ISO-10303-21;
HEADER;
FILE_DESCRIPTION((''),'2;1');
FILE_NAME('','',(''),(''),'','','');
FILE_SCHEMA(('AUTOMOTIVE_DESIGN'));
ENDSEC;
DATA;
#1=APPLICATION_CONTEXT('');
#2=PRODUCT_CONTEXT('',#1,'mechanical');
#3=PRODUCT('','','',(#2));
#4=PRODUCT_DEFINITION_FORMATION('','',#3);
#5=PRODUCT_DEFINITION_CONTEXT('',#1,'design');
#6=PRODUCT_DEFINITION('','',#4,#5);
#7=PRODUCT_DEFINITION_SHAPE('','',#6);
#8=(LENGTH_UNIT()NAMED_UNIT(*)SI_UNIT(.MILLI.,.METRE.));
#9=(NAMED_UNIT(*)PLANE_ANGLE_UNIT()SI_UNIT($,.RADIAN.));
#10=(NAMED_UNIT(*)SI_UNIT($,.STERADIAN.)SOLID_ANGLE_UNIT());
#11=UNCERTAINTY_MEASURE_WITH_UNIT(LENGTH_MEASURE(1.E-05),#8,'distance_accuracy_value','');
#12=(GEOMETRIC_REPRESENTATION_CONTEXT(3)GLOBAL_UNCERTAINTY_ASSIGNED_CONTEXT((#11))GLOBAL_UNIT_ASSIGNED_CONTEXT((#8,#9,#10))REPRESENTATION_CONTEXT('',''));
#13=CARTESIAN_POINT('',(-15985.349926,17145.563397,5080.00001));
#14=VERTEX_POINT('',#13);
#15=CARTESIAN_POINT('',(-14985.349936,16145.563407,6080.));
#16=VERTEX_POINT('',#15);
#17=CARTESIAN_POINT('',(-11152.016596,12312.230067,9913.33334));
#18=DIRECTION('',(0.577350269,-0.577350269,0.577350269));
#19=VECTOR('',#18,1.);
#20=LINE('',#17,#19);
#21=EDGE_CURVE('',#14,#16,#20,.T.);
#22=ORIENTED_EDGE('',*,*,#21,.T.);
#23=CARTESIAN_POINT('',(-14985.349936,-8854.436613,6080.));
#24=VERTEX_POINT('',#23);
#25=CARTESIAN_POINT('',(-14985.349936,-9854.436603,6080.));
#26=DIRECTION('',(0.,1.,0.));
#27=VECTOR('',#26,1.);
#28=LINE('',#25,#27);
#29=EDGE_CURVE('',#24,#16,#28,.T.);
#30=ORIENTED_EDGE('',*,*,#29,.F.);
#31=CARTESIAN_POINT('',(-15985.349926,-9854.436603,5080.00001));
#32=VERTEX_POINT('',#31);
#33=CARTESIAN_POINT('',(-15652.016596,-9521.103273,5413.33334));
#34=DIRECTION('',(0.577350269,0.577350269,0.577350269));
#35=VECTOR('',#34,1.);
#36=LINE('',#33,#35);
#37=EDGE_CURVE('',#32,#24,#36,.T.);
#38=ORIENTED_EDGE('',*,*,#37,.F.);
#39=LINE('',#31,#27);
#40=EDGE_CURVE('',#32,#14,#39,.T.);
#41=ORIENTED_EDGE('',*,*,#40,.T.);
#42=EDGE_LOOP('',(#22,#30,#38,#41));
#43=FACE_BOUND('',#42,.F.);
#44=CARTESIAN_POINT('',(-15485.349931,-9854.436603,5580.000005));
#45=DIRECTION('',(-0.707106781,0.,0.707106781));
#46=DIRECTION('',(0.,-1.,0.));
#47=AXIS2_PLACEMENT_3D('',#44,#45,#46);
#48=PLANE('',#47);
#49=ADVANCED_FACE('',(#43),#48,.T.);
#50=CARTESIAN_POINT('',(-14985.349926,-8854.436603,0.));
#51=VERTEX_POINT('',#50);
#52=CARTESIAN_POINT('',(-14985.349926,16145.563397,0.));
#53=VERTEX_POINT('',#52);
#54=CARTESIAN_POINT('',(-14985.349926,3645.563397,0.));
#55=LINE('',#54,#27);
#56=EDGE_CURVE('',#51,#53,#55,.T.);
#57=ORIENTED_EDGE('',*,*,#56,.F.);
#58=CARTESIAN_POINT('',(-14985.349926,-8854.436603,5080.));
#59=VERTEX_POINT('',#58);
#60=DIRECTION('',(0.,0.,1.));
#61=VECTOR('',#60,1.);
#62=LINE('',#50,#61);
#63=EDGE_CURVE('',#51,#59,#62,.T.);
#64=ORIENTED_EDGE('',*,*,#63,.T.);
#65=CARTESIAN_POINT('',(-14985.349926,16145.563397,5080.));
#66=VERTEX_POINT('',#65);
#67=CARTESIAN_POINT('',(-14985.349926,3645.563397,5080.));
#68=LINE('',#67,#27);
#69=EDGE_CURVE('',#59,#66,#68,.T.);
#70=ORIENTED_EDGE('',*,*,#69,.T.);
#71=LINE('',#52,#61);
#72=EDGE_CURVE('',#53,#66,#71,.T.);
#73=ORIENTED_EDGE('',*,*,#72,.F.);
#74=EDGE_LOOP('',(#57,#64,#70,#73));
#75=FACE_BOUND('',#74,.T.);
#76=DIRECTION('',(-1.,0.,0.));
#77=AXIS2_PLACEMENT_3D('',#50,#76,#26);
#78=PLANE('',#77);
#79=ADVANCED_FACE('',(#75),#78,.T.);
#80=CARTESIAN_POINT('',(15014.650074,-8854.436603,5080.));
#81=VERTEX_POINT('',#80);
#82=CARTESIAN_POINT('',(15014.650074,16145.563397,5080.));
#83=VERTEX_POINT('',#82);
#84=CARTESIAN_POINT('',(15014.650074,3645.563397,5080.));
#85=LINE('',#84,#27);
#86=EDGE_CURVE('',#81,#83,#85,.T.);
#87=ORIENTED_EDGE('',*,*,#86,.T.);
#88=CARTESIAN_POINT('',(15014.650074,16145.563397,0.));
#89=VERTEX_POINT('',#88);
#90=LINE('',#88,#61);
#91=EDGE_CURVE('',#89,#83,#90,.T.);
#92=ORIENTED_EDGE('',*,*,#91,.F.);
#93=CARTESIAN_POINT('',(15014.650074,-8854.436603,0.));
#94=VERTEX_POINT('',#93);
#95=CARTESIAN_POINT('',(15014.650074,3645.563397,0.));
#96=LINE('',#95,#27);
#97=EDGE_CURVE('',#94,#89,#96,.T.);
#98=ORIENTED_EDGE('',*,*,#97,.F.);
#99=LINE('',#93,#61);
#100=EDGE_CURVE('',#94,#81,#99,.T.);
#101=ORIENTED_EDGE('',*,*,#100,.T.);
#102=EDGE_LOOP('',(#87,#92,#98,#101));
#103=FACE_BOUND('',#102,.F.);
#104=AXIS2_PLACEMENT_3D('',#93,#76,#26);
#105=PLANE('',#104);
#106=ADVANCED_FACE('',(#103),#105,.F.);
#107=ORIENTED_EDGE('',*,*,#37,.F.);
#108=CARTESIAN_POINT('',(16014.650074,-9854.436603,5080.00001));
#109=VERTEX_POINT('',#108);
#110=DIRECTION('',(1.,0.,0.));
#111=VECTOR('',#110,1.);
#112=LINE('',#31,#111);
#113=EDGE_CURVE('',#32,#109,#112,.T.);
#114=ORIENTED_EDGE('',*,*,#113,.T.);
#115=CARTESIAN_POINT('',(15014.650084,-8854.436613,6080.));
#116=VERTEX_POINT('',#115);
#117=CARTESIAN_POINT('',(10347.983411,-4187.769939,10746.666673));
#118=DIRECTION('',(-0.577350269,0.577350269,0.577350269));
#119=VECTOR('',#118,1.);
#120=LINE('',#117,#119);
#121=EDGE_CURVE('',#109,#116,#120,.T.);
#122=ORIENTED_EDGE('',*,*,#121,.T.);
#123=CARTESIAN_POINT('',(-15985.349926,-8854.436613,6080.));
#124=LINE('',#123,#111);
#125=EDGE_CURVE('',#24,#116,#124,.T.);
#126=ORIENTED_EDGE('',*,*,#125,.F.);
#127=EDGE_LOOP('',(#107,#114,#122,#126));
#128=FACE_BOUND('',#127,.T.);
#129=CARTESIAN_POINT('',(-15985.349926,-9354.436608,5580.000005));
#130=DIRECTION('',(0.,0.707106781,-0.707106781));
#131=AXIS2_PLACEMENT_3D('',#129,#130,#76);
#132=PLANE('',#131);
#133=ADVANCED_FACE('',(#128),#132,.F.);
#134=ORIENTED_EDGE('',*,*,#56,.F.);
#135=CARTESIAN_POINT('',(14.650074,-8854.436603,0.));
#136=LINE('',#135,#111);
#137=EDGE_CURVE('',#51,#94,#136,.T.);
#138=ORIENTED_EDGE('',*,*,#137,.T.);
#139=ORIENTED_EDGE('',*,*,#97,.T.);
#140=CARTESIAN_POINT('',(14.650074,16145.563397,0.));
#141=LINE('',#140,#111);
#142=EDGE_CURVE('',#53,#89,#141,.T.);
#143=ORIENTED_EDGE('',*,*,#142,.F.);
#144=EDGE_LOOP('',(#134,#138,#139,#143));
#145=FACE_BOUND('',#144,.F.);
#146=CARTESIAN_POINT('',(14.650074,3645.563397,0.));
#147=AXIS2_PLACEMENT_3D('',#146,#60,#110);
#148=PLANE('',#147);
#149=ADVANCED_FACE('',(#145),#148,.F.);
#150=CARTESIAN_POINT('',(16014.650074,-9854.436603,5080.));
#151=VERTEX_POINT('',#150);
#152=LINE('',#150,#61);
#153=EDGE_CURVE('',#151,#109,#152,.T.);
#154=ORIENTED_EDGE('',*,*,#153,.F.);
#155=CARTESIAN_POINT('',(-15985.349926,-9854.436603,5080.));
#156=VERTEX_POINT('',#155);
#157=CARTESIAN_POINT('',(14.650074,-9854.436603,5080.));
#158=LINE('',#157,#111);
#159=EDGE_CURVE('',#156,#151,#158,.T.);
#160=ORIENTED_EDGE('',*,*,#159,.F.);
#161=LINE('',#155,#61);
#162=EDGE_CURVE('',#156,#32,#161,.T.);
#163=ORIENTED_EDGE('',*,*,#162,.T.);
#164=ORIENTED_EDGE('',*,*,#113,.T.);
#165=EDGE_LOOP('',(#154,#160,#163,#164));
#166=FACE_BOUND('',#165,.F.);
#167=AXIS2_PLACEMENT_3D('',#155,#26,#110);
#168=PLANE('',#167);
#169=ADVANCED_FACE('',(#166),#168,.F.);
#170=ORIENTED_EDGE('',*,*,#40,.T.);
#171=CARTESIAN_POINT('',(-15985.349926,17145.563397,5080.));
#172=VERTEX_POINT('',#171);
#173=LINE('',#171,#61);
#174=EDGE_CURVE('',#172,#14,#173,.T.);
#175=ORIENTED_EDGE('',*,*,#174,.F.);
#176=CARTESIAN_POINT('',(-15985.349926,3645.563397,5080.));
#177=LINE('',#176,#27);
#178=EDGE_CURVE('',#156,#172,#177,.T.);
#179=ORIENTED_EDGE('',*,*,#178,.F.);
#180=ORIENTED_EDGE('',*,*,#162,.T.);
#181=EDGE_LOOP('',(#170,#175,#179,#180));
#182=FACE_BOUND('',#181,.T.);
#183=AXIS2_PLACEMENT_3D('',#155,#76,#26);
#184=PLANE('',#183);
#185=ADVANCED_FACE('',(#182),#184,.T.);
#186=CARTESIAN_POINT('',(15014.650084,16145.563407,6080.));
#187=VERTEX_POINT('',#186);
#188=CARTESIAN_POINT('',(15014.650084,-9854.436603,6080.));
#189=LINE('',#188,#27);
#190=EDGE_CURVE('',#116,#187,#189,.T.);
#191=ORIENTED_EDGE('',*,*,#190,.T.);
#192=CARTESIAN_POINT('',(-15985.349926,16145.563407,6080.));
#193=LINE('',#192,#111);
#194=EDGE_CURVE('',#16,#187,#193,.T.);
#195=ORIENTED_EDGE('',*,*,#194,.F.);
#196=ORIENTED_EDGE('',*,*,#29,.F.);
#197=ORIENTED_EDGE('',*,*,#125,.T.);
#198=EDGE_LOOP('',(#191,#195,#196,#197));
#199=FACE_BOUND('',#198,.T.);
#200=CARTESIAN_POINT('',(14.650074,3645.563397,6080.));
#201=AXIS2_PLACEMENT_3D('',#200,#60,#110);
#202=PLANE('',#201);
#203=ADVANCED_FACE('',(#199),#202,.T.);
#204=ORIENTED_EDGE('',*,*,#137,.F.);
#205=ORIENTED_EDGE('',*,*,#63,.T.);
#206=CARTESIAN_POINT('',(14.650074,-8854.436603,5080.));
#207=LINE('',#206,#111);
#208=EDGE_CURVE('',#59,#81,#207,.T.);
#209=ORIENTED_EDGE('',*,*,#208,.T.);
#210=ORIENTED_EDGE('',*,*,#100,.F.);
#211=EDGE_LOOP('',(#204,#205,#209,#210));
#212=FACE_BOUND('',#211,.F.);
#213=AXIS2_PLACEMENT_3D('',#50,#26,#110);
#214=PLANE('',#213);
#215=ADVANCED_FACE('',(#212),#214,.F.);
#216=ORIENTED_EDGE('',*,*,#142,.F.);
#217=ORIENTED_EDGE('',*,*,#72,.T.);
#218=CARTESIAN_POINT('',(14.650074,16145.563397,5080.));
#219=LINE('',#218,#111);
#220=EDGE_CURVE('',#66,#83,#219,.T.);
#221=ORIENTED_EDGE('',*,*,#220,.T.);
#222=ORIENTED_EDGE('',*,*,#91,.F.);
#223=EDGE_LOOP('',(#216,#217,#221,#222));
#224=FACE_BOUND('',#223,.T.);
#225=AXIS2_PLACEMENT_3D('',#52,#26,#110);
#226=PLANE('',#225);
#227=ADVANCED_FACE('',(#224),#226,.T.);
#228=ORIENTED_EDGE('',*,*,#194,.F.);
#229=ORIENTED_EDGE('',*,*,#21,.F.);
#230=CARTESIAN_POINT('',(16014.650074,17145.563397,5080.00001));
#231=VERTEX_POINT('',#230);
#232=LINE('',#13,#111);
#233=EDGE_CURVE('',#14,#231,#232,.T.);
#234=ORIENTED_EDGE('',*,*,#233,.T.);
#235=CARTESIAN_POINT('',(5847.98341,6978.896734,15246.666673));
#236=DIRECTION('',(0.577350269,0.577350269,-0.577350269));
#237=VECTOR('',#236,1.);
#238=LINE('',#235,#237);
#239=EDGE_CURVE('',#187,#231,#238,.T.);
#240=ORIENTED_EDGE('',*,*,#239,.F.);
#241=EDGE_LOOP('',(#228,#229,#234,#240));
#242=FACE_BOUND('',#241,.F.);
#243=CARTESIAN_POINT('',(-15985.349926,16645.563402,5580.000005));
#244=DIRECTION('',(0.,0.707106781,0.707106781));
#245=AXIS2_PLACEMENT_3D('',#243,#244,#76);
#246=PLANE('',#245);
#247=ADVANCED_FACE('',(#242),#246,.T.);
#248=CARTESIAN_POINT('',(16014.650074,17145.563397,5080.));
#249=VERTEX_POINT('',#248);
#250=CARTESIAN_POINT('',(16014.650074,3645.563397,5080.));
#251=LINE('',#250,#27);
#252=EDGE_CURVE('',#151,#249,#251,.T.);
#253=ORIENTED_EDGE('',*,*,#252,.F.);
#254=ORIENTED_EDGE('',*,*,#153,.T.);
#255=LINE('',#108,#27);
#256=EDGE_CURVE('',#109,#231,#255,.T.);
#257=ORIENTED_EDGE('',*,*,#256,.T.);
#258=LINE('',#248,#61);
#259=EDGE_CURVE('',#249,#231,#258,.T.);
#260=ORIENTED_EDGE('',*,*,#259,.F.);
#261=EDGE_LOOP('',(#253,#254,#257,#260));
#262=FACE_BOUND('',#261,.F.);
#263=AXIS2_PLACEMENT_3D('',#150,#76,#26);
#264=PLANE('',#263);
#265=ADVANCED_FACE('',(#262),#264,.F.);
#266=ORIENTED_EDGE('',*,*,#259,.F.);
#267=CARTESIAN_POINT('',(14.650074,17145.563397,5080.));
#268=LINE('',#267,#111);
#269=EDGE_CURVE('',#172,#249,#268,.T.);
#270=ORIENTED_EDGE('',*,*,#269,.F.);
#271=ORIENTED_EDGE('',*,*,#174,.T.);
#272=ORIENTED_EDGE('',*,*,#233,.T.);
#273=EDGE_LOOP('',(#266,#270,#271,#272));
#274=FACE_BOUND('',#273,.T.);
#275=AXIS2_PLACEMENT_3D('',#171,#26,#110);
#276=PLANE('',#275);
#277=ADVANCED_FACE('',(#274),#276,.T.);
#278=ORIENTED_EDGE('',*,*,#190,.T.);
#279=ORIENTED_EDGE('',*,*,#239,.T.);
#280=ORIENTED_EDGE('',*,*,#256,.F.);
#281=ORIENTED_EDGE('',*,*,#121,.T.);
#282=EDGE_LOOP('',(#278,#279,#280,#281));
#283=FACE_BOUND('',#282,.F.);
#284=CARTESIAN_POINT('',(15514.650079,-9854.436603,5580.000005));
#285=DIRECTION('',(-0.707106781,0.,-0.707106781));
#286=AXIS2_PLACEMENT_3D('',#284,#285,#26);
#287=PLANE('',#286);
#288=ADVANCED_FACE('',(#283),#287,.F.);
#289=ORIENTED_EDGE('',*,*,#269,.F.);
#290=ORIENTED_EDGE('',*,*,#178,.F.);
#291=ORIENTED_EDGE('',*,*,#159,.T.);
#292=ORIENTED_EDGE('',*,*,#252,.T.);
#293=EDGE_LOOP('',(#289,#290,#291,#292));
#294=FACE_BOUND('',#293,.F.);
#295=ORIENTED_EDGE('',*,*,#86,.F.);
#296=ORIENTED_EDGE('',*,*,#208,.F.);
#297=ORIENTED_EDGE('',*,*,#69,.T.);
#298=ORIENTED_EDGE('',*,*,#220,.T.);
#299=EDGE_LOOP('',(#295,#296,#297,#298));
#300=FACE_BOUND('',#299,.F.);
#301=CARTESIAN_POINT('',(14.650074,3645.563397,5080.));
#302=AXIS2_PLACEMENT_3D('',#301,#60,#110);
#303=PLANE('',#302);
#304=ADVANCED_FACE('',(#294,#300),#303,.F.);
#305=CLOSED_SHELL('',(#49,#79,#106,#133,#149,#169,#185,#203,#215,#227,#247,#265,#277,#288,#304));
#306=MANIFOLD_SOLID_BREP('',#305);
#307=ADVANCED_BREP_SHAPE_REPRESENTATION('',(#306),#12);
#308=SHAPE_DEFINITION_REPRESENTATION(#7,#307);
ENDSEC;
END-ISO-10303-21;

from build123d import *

# Parameters (mm, degrees)
F0_W     = 30000
F0_H     = 25000
F1_DEPTH = 5080
F2_W     = 32000
F2_H     = 27000
F3_DEPTH = 1000
F4_SIZE  = 999.99999


# Not quite as in the source:
# - a fillet or chamfer is up to 0.001 mm smaller than in the source, because OpenCascade refuses the exact size


with BuildPart() as f1:
    # F0 (on Top) → F1 (new body)
    with BuildSketch(Plane.XY):
        with Locations((14.6500738338, 3645.5633971739)):
            Rectangle(F0_W, F0_H)
    extrude(amount=F1_DEPTH)

    # F2 (on face) → F3 (join)
    with BuildSketch(Plane.XY.offset(5080)):
        with Locations((14.6500738338, 3645.5633971739)):
            Rectangle(F2_W, F2_H)
    extrude(amount=F3_DEPTH)

    # F4 (size 1000 in the source; OpenCascade refuses exactly that, so slightly less here)
    f4_edges = [f1.edges().sort_by_distance(p)[0] for p in [
        (14.650074, -9854.436603, 6080),
        (16014.650074, 3645.563397, 6080),
        (14.650074, 17145.563397, 6080),
        (-15985.349926, 3645.563397, 6080),
    ]]
    chamfer(f4_edges, length=F4_SIZE)


solid = f1.part
